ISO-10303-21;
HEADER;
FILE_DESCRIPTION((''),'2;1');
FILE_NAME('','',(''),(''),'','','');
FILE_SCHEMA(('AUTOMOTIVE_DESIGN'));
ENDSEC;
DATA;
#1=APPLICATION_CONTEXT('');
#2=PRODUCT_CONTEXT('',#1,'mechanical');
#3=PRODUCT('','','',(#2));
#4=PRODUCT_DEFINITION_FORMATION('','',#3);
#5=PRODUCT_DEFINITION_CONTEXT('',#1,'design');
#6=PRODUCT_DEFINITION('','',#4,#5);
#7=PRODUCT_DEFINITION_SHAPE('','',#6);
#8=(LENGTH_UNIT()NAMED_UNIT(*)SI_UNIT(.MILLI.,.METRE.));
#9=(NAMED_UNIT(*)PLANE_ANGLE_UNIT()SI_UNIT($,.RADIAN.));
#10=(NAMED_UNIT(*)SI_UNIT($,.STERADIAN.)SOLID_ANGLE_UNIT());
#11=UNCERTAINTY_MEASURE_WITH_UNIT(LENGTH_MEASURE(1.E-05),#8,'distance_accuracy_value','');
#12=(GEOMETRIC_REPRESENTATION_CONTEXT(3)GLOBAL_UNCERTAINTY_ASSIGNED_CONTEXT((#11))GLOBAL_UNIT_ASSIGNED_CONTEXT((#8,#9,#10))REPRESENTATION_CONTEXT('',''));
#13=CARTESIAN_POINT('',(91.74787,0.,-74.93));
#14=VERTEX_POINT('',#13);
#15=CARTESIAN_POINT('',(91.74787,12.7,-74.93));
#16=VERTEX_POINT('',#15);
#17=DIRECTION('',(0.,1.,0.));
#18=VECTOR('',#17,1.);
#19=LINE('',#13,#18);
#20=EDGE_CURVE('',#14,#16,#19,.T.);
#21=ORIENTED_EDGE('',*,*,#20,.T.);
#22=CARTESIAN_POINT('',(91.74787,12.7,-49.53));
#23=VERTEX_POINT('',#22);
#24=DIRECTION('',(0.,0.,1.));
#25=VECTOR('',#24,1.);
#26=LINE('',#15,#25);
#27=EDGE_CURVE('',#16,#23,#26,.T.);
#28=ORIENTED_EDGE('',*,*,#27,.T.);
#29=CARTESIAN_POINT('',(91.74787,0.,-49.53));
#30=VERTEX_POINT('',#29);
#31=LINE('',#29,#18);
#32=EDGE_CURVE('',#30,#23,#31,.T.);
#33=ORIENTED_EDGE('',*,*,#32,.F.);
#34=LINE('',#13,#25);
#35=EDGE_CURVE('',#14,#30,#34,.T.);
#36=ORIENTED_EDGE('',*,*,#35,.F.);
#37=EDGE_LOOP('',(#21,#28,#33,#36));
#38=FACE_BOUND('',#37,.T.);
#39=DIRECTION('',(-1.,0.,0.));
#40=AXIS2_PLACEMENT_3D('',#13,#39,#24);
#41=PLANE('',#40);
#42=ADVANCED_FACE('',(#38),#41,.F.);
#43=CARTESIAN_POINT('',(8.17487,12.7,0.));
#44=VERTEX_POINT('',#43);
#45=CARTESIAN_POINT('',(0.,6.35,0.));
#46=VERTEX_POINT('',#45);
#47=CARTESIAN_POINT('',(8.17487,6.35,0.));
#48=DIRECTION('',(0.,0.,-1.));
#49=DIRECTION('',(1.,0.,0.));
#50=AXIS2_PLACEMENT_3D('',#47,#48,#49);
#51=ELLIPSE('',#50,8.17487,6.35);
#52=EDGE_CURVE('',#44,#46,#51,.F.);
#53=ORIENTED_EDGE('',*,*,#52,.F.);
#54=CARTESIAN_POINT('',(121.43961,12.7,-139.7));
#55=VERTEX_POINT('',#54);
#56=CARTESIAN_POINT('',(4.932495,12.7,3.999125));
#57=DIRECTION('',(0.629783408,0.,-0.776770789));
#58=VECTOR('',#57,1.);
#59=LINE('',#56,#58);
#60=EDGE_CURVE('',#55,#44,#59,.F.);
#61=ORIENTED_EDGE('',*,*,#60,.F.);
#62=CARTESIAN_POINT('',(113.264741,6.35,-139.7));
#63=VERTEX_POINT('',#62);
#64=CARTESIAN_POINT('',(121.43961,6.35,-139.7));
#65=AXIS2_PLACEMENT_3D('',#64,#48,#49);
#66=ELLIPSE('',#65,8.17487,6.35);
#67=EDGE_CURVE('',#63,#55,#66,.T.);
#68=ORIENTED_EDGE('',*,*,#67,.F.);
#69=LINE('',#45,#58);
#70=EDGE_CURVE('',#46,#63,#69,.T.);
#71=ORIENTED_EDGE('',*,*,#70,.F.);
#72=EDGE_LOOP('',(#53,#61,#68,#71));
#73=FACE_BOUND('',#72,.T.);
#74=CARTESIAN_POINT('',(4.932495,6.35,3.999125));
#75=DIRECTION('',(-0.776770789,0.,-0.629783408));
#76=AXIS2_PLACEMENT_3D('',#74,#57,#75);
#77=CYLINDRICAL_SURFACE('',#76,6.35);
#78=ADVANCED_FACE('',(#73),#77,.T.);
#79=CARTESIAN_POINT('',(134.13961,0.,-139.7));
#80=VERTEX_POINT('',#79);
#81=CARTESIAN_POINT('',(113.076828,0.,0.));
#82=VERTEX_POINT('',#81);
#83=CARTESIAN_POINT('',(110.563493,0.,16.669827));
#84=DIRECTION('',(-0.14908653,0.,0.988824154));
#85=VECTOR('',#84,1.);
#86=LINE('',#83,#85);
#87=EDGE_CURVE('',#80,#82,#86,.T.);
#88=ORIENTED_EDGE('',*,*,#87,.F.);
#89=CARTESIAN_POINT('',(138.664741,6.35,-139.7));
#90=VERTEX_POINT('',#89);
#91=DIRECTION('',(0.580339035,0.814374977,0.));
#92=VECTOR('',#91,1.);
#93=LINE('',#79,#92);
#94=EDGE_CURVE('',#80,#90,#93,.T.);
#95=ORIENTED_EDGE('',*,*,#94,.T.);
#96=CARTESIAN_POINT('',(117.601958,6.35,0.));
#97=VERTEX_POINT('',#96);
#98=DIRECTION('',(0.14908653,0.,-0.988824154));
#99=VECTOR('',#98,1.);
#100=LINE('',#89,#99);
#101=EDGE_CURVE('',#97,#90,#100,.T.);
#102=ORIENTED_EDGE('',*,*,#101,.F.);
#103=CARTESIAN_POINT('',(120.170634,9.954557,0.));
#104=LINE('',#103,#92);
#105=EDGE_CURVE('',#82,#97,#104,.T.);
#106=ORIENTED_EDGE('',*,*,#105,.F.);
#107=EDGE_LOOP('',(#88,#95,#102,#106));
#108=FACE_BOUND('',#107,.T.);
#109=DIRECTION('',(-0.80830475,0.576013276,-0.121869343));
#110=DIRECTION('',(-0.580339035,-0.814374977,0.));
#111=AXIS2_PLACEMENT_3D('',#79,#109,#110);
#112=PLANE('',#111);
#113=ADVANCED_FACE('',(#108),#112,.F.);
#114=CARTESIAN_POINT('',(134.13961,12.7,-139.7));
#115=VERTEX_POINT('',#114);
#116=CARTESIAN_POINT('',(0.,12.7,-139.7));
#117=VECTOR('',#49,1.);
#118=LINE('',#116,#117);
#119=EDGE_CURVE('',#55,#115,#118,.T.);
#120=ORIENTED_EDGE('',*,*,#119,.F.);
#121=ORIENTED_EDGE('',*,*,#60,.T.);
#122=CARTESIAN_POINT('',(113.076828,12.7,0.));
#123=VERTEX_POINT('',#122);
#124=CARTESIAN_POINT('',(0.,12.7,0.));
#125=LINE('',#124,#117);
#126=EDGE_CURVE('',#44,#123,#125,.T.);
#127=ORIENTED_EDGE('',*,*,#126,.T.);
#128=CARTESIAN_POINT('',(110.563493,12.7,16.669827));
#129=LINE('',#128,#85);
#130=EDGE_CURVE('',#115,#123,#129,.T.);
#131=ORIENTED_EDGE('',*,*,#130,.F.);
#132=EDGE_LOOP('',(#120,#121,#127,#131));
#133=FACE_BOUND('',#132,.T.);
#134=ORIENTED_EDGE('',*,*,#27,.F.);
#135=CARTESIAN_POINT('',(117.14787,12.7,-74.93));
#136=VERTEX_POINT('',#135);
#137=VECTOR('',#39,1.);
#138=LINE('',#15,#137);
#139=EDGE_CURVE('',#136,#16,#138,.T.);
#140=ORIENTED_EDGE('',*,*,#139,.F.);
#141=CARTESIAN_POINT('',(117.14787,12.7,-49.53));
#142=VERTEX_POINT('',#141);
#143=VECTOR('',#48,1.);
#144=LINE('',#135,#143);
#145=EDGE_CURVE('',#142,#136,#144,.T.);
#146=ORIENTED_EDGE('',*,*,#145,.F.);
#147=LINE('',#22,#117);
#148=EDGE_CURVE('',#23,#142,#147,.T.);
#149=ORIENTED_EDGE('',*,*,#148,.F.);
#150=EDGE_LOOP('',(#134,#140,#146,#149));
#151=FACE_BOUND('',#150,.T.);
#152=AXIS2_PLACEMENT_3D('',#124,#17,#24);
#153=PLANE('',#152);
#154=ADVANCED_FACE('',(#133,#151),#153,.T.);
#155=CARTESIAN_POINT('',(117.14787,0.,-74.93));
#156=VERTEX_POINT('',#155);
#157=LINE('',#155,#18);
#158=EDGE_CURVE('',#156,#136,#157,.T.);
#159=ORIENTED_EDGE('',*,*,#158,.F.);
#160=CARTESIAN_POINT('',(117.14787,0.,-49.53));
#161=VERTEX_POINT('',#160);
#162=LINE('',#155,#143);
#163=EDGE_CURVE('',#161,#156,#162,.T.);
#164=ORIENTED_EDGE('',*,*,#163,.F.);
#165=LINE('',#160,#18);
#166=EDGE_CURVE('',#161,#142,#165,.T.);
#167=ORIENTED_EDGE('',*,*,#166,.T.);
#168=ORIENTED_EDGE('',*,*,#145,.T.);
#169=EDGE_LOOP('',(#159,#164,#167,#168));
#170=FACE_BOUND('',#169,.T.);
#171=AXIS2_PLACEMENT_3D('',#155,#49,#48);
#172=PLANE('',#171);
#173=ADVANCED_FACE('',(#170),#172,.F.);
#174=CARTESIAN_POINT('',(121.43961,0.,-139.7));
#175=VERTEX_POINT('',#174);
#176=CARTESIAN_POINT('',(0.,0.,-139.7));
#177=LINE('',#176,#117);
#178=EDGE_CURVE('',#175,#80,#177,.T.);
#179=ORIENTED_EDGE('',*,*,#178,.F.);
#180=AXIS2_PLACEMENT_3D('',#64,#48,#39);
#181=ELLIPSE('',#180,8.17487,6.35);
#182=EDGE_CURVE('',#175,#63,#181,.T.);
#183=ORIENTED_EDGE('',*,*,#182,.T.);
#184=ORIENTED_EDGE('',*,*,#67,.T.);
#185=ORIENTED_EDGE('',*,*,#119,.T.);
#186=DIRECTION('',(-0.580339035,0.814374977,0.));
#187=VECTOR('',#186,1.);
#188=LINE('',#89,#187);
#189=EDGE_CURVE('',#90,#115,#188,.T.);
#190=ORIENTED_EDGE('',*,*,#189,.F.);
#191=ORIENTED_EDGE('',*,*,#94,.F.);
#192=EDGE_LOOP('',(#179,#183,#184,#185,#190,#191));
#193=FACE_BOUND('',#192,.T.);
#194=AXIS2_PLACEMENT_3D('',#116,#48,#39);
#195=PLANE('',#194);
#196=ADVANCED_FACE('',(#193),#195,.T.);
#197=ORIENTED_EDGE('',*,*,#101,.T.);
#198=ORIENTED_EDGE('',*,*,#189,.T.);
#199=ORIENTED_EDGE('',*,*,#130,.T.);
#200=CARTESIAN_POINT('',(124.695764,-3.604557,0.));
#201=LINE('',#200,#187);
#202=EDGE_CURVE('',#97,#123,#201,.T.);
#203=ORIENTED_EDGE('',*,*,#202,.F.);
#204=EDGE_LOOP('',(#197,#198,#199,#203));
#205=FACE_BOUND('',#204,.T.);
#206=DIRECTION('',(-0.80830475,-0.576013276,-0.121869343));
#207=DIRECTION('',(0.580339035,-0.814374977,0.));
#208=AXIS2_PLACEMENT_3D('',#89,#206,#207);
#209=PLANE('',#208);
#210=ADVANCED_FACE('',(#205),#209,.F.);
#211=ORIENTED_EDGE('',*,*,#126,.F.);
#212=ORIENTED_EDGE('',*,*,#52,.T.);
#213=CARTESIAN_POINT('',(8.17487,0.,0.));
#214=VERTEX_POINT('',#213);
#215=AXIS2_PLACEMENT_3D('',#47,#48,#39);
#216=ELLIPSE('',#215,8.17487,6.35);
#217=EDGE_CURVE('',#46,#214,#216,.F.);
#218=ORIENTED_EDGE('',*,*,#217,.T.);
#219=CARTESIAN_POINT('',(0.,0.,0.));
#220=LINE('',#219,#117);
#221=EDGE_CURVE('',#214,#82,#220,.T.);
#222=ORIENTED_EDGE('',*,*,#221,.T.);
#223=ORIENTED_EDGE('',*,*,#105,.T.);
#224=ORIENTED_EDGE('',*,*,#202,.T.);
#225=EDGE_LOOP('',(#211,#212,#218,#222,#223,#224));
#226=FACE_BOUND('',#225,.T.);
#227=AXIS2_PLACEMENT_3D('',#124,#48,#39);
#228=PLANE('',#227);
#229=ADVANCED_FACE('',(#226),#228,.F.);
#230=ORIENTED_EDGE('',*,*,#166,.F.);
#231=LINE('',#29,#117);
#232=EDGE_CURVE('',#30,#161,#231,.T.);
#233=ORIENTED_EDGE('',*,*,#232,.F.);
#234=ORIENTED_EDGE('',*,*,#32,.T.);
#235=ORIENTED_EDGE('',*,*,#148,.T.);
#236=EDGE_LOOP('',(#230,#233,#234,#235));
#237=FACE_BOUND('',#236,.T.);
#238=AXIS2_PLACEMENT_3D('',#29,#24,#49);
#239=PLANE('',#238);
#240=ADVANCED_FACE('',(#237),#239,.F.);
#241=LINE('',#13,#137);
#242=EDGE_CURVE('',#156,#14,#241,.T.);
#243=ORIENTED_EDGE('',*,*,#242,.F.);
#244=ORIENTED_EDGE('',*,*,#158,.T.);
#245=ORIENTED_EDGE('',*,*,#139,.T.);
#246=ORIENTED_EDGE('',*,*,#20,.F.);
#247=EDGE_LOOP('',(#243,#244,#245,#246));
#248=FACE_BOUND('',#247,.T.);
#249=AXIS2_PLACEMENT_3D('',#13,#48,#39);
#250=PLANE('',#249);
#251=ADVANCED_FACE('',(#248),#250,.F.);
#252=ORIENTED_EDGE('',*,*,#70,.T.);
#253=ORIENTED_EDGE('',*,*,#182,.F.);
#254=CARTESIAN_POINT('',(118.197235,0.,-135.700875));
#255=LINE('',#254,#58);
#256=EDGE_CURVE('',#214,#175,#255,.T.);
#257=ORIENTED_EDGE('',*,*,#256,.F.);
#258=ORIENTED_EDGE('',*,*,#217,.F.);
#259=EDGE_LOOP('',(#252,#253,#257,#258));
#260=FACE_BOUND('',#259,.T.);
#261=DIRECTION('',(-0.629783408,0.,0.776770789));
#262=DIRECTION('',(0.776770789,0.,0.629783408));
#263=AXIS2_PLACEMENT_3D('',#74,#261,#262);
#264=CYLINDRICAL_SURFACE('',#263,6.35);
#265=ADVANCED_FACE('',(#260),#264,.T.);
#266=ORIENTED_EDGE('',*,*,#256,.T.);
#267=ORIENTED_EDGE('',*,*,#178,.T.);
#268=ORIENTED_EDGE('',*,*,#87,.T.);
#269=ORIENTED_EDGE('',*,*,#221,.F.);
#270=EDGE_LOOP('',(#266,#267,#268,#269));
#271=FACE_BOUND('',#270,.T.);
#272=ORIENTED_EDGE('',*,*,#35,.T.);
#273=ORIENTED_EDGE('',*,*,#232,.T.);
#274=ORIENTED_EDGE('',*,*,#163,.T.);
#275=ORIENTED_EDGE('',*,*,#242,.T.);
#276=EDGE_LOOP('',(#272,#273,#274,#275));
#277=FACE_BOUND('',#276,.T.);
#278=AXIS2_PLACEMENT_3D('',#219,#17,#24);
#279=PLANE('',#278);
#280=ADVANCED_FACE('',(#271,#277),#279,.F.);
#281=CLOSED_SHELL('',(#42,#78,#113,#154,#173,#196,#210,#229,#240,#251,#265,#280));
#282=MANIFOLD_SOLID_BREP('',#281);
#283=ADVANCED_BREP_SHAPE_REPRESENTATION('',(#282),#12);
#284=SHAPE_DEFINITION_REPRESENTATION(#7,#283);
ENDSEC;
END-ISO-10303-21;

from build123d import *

# Parameters (mm, degrees)
BOSS_EXTRUDE1_DEPTH          = 12.7
SERVO_HOLE_DEPTH             = 224.084518592
SERVO_HOLE_DEPTH_BACK        = 224.084518592
SKETCH3_W                    = 25.4
SKETCH3_H                    = 25.4
FILLET1_R                    = 6.35
CUT_EXTRUDE1_DEPTH           = 224.084518592
CUT_EXTRUDE1_TAPER           = -7
CUT_EXTRUDE1_OTHER_WAY_DEPTH = 224.084518592


with BuildPart() as part:
    # Sketch1 → Boss-Extrude1 (new body)
    with BuildSketch(Plane(origin=(0, 0, 0), x_dir=(1, 0, 0), z_dir=(0, 1, 0))):
        Polygon((128.31424077, 139.7), (37.592, 0), (150.368, 0), (173.46274077, 139.7), align=None)
        Polygon((113.26474077, 139.7), (0, 0), (37.592, 0), (128.31424077, 139.7), align=None)
    extrude(amount=BOSS_EXTRUDE1_DEPTH)

    # Sketch3 → servo hole (cut, two sides: drawn at the far end of the back side and taken through both)
    with BuildSketch(Plane(origin=(0, 12.7, 0), x_dir=(1, 0, 0), z_dir=(0, 1, 0)).offset(-SERVO_HOLE_DEPTH_BACK)):
        with Locations((104.447870385, 62.23)):
            Rectangle(SKETCH3_W, SKETCH3_H)
    extrude(amount=SERVO_HOLE_DEPTH + SERVO_HOLE_DEPTH_BACK, mode=Mode.SUBTRACT)

    # Fillet1
    fillet1_edges = [part.edges().sort_by_distance(p)[0] for p in [
        (56.632370385, 0, -69.85),
        (56.632370385, 12.7, -69.85),
    ]]
    fillet(fillet1_edges, radius=FILLET1_R - 0.0001)  # a hair under: the kernel refuses the full size

    # Sketch4 → Cut-Extrude1 (cut)
    with BuildSketch(Plane(origin=(0, 0, -139.7), x_dir=(-1, 0, 0), z_dir=(0, 0, -1))):
        Polygon((-134.139610484, 0), (-138.66474077, 6.35), (-134.139610484, 12.7), (-173.46274077, 12.7), (-173.46274077, 0), align=None)
    extrude(amount=-CUT_EXTRUDE1_DEPTH, taper=CUT_EXTRUDE1_TAPER, mode=Mode.SUBTRACT)

    # Sketch4 → Cut-Extrude1 other way (cut)
    with BuildSketch(Plane(origin=(0, 0, -139.7), x_dir=(-1, 0, 0), z_dir=(0, 0, -1))):
        Polygon((-134.139610484, 0), (-138.66474077, 6.35), (-134.139610484, 12.7), (-173.46274077, 12.7), (-173.46274077, 0), align=None)
    extrude(amount=CUT_EXTRUDE1_OTHER_WAY_DEPTH, mode=Mode.SUBTRACT)


solid = part.part
